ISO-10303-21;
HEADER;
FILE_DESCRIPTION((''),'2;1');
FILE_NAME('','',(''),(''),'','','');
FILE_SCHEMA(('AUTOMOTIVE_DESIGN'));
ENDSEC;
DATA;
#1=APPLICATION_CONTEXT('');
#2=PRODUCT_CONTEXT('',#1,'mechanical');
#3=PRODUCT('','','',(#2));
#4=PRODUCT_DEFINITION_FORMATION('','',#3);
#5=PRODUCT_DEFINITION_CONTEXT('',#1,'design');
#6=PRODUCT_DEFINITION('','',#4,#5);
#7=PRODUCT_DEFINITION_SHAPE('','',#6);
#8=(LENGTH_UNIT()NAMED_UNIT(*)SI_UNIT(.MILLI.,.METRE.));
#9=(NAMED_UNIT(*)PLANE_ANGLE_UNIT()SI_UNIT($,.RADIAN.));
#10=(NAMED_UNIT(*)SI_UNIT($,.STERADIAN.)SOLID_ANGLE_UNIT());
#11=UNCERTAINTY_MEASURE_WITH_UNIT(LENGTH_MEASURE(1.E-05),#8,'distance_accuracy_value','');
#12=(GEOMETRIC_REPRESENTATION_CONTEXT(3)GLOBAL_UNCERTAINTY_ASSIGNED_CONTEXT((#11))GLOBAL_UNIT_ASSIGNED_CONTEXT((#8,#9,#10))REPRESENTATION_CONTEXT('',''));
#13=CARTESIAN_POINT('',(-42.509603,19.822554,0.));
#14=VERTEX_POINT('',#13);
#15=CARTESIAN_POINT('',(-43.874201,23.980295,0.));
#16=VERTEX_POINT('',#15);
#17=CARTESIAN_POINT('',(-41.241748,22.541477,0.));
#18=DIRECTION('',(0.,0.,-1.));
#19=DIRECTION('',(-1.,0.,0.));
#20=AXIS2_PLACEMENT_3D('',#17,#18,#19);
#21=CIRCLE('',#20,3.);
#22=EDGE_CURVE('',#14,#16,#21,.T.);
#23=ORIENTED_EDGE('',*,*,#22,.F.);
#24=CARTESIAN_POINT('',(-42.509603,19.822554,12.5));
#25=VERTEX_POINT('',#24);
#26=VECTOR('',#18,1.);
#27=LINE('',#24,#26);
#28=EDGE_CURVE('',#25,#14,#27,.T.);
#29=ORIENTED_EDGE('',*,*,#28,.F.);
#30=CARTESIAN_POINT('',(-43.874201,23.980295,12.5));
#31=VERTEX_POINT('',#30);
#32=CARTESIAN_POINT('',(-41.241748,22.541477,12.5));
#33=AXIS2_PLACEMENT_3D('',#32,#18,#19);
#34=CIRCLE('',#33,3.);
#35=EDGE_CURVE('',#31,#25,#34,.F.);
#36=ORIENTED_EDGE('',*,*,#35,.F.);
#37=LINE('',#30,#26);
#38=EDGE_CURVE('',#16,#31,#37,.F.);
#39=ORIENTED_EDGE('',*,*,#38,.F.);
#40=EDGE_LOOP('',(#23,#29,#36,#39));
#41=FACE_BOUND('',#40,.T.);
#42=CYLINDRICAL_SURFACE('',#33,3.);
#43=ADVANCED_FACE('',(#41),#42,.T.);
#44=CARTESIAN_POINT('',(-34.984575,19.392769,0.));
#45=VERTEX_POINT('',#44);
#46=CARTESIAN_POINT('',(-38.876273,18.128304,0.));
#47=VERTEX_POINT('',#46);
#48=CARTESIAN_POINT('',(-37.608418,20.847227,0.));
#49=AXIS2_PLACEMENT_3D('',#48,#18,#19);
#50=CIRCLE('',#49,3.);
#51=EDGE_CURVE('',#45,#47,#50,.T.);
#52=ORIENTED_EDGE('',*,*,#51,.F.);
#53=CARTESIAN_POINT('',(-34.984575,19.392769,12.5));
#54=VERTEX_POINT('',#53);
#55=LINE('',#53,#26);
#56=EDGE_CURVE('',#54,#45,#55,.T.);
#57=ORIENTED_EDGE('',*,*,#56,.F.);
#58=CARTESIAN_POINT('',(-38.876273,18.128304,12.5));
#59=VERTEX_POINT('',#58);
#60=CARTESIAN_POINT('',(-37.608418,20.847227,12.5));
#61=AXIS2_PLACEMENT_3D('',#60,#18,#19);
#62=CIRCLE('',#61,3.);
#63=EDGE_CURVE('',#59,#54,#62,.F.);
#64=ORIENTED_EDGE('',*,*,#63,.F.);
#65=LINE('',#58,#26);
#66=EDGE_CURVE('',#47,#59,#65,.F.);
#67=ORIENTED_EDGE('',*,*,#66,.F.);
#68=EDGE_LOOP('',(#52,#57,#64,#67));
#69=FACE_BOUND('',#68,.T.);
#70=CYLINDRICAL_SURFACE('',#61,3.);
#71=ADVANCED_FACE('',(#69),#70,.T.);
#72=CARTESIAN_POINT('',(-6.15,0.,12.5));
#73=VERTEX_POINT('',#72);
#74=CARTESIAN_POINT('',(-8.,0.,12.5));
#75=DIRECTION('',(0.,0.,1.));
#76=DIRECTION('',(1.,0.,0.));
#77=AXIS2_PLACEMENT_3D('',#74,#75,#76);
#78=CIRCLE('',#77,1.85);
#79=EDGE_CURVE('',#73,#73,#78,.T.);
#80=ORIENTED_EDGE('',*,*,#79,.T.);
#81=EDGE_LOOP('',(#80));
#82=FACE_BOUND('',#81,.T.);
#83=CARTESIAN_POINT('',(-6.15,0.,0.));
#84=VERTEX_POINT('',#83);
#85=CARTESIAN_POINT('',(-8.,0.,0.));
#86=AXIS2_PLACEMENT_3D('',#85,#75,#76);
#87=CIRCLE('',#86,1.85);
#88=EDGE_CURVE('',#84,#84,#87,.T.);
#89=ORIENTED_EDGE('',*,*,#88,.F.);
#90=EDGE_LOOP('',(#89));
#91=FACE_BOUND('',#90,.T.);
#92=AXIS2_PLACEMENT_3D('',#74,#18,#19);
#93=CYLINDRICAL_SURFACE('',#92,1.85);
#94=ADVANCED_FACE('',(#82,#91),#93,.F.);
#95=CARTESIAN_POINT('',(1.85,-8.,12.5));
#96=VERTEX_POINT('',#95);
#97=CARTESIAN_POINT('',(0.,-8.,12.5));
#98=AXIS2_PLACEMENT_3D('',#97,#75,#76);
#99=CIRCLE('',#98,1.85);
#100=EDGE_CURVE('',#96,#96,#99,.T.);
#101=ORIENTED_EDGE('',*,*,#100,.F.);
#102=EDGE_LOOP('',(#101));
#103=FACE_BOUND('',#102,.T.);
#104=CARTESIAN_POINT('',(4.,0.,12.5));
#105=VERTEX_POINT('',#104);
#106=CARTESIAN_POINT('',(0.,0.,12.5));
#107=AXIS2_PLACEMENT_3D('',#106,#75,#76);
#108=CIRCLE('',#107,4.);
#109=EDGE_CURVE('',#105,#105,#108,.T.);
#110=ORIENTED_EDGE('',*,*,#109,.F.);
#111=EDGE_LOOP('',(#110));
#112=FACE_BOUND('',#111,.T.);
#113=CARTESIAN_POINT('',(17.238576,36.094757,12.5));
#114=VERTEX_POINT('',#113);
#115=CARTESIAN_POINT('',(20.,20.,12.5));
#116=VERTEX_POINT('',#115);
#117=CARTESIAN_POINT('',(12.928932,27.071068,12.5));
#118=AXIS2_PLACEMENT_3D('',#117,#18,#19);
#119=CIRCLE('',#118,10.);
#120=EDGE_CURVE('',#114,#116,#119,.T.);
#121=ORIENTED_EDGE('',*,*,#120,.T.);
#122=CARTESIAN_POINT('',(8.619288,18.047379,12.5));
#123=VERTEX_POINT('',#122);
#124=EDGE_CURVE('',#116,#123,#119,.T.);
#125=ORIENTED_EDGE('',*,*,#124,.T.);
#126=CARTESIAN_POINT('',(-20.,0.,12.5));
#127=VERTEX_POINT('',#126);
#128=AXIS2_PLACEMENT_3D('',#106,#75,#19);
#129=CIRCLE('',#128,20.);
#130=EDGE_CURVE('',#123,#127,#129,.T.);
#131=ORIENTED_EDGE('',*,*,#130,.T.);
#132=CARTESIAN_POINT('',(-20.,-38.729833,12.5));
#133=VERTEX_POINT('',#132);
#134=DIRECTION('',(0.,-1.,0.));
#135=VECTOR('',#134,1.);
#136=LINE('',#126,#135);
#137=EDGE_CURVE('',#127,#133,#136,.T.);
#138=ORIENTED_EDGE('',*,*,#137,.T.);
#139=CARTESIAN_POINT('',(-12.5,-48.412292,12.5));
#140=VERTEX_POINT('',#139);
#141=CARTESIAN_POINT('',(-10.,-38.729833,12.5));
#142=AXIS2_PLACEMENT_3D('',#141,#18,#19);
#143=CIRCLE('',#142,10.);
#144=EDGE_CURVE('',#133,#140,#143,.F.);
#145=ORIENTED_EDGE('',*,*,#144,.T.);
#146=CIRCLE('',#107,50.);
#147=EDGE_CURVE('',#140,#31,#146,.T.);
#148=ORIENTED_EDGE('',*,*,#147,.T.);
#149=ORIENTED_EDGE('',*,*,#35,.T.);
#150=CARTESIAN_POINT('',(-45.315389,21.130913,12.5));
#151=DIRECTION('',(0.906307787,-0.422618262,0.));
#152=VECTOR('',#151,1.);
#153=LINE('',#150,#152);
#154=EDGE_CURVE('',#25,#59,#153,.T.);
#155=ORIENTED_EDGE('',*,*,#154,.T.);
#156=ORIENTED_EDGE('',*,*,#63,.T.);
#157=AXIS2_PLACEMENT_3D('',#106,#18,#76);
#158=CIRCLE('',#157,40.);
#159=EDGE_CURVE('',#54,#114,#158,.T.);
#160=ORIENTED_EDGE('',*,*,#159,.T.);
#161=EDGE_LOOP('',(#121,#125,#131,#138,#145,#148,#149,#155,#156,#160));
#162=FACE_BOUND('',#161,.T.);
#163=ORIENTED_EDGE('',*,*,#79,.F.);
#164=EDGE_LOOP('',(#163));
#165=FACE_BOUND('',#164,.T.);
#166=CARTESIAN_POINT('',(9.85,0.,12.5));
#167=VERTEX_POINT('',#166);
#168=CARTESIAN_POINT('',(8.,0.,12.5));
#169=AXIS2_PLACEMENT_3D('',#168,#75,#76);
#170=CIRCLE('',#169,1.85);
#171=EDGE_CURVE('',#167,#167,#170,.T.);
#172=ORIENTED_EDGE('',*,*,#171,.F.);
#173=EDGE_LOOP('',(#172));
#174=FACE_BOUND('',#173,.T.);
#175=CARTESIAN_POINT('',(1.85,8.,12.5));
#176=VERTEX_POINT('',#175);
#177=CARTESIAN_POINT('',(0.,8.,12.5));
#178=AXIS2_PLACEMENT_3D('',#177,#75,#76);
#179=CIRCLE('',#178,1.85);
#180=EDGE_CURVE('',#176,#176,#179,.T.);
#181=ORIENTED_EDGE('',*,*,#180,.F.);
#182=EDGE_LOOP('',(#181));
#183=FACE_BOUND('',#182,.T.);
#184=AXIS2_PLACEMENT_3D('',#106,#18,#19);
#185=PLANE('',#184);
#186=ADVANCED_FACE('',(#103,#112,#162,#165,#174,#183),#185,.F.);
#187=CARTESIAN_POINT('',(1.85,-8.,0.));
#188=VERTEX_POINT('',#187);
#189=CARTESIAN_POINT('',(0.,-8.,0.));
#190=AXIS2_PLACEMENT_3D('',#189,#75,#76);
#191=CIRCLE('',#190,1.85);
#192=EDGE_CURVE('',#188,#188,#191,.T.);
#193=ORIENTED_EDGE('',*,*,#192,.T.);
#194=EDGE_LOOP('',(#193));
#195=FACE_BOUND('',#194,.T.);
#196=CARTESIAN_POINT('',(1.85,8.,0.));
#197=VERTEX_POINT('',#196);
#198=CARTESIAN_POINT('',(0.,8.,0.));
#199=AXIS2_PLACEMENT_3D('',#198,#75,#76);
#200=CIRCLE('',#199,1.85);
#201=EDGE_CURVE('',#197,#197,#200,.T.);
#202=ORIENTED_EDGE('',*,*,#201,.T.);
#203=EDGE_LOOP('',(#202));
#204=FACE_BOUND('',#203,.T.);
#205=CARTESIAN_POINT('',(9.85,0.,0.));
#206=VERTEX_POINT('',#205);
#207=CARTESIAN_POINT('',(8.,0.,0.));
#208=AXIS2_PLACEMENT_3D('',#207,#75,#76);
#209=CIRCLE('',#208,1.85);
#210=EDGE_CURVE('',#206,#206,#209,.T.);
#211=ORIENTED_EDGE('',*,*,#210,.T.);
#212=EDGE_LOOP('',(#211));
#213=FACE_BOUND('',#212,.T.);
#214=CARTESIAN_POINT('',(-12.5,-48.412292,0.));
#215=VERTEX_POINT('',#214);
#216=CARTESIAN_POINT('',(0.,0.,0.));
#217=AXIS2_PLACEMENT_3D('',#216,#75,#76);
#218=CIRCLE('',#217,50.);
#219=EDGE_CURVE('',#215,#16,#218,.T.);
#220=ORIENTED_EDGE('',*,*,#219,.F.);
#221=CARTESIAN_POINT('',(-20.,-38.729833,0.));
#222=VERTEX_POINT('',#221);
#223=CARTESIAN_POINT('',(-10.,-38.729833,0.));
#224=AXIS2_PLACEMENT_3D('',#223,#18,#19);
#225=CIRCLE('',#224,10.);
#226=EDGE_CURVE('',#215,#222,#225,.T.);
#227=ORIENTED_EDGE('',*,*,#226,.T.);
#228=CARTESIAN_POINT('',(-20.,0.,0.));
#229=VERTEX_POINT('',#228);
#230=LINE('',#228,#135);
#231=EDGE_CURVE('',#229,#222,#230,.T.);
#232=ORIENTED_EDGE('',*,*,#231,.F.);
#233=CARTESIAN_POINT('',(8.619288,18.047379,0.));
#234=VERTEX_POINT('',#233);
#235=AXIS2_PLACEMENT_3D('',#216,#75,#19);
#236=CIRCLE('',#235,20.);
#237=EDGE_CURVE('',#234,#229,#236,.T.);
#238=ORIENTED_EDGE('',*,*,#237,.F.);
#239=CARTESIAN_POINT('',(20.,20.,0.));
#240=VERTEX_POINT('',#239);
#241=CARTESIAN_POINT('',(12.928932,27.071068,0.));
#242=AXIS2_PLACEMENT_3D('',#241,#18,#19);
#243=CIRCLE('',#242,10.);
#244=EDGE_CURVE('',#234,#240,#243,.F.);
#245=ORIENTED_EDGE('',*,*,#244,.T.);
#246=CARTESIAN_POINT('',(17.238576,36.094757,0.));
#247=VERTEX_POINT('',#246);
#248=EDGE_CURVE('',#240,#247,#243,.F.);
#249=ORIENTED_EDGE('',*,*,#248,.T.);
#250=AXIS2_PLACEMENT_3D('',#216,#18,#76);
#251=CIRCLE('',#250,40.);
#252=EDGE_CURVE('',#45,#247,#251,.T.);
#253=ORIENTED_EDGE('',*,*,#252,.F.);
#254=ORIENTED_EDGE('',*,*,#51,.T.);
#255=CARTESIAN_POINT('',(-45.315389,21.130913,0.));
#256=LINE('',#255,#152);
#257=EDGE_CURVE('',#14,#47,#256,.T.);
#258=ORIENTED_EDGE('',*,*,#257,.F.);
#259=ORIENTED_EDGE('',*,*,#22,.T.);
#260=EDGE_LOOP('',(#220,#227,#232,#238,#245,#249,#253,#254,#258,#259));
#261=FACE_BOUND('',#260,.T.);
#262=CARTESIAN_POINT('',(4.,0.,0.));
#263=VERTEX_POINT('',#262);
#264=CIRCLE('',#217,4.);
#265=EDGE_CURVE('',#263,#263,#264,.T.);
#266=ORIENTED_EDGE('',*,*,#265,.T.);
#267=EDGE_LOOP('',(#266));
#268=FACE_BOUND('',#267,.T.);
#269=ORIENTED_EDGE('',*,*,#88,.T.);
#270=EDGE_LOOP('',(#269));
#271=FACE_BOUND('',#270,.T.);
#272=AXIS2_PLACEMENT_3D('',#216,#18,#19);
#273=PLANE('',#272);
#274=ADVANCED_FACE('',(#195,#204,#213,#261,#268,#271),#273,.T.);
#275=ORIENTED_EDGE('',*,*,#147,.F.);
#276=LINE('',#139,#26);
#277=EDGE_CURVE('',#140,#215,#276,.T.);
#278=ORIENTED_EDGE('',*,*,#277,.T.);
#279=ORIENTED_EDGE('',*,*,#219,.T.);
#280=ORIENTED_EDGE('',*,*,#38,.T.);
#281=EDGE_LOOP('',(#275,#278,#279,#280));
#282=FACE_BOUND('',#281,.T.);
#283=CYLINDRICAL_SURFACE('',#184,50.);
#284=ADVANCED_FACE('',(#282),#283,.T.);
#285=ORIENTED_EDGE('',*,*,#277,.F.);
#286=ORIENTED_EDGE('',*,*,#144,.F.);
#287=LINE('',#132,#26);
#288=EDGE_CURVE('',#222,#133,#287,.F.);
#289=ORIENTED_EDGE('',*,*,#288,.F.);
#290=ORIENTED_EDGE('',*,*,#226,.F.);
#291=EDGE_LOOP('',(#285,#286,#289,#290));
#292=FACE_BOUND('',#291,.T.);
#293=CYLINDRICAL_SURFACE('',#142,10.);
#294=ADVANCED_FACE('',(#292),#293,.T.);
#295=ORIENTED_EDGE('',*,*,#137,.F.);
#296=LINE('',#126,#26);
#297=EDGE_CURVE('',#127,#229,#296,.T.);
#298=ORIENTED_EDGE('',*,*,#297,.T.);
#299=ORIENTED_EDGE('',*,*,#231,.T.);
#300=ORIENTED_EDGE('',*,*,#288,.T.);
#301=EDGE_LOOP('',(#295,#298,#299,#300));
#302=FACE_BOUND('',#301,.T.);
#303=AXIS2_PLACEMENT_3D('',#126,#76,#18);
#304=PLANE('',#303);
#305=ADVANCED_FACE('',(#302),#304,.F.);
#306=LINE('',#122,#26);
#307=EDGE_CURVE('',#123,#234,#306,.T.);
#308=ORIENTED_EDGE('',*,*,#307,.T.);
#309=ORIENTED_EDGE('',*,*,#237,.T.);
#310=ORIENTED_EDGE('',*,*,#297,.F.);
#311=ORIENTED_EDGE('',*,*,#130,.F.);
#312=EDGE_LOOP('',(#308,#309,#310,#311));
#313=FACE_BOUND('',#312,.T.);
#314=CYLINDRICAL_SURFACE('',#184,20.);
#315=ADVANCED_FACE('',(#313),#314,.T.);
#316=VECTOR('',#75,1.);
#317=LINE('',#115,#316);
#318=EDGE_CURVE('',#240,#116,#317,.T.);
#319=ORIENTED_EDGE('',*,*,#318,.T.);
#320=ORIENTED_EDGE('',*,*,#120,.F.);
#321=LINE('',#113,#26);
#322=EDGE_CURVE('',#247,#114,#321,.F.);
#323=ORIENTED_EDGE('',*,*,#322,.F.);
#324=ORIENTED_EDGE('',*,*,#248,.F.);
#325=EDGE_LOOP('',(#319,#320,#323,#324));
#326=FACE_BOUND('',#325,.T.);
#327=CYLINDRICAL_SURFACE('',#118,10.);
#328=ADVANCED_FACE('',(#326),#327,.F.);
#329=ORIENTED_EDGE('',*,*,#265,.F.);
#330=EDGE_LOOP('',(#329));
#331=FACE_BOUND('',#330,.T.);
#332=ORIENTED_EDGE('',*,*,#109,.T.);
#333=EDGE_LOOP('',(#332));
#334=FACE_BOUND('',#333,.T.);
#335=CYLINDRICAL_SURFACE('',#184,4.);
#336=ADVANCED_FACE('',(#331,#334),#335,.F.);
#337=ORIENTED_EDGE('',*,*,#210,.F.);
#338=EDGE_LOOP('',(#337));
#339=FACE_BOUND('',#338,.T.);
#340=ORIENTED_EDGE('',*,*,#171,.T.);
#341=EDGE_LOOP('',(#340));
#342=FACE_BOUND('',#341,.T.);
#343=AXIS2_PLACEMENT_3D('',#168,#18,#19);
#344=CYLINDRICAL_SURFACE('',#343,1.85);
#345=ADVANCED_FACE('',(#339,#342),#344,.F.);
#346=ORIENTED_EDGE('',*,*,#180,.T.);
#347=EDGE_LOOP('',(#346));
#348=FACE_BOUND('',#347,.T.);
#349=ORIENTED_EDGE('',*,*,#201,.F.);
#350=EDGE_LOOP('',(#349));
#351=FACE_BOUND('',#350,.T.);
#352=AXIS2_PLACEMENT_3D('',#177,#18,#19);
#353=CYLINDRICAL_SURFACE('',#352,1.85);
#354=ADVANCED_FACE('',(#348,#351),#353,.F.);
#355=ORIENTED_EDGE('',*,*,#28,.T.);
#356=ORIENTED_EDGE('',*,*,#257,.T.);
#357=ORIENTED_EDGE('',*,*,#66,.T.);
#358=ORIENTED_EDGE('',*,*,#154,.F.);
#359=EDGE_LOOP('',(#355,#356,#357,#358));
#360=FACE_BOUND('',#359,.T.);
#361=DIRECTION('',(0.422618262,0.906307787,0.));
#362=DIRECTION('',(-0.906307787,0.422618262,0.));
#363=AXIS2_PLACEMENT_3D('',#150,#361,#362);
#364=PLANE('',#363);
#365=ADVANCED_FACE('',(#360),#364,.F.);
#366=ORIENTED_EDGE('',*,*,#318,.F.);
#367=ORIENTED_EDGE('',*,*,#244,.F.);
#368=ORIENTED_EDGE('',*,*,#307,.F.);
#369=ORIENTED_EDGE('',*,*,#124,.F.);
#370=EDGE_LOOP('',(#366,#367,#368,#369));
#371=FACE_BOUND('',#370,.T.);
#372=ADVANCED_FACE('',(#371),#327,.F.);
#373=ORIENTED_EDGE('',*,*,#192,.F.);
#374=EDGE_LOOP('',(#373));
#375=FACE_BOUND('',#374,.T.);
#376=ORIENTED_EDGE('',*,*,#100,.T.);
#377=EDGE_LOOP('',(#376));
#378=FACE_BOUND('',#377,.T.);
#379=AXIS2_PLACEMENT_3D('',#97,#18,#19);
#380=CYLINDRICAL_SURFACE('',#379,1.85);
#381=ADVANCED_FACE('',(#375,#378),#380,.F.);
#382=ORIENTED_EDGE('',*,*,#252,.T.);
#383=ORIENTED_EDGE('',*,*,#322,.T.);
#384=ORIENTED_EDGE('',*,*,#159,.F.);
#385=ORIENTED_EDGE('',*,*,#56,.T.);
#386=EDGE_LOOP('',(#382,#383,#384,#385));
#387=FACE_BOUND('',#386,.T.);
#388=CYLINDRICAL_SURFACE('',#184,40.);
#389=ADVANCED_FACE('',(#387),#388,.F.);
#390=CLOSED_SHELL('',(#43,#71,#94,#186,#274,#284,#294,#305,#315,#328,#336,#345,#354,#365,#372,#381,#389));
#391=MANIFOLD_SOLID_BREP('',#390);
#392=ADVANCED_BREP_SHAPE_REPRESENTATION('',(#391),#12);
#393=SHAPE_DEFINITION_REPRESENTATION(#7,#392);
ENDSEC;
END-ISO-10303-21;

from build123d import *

# Parameters (mm, degrees)
SKETCH1_R           = 4
SKETCH1_R_2         = 1.85
BOSS_EXTRUDE1_DEPTH = 12.5
FILLET1_R           = 10
FILLET2_R           = 3
FILLET3_R           = 10


with BuildPart() as part:
    # Sketch1 → Boss-Extrude1 (new body)
    with BuildSketch(Plane.XY):
        with BuildLine():
            Line((14.142135624, 14.142135624), (28.284271247, 28.284271247))
            ThreePointArc((28.284271247, 28.284271247), (-6.945927107, 39.39231012), (-36.252311481, 16.90473047))
            Line((-36.252311481, 16.90473047), (-45.315389352, 21.130913087))
            ThreePointArc((-45.315389352, 21.130913087), (46.768835106, 17.682648638), (-20, -45.82575695))
            Line((-20, -45.82575695), (-20, 0))
            ThreePointArc((-20, 0), (-7.653668647, 18.47759065), (14.142135624, 14.142135624))
        make_face()
        Circle(SKETCH1_R, mode=Mode.SUBTRACT)
        with Locations((0, 8)):
            Circle(SKETCH1_R_2, mode=Mode.SUBTRACT)
        with Locations((8, 0)):
            Circle(SKETCH1_R_2, mode=Mode.SUBTRACT)
        with Locations((0, -8)):
            Circle(SKETCH1_R_2, mode=Mode.SUBTRACT)
        with Locations((-8, 0)):
            Circle(SKETCH1_R_2, mode=Mode.SUBTRACT)
    extrude(amount=BOSS_EXTRUDE1_DEPTH)

    # Fillet1
    fillet1_edges = [part.edges().sort_by_distance(p)[0] for p in [
        (28.284271247, 28.284271247, 6.25),
        (14.142135624, 14.142135624, 6.25),
    ]]
    fillet(fillet1_edges, radius=FILLET1_R - 0.0001)  # a hair under: the kernel refuses the full size

    # Fillet2
    fillet2_edges = [part.edges().sort_by_distance(p)[0] for p in [
        (-36.252311481, 16.90473047, 6.25),
        (-45.315389352, 21.130913087, 6.25),
    ]]
    fillet(fillet2_edges, radius=FILLET2_R)

    # Fillet3
    fillet3_edges = [part.edges().sort_by_distance(p)[0] for p in [
        (-20, -45.82575695, 6.25),
    ]]
    fillet(fillet3_edges, radius=FILLET3_R)


solid = part.part
